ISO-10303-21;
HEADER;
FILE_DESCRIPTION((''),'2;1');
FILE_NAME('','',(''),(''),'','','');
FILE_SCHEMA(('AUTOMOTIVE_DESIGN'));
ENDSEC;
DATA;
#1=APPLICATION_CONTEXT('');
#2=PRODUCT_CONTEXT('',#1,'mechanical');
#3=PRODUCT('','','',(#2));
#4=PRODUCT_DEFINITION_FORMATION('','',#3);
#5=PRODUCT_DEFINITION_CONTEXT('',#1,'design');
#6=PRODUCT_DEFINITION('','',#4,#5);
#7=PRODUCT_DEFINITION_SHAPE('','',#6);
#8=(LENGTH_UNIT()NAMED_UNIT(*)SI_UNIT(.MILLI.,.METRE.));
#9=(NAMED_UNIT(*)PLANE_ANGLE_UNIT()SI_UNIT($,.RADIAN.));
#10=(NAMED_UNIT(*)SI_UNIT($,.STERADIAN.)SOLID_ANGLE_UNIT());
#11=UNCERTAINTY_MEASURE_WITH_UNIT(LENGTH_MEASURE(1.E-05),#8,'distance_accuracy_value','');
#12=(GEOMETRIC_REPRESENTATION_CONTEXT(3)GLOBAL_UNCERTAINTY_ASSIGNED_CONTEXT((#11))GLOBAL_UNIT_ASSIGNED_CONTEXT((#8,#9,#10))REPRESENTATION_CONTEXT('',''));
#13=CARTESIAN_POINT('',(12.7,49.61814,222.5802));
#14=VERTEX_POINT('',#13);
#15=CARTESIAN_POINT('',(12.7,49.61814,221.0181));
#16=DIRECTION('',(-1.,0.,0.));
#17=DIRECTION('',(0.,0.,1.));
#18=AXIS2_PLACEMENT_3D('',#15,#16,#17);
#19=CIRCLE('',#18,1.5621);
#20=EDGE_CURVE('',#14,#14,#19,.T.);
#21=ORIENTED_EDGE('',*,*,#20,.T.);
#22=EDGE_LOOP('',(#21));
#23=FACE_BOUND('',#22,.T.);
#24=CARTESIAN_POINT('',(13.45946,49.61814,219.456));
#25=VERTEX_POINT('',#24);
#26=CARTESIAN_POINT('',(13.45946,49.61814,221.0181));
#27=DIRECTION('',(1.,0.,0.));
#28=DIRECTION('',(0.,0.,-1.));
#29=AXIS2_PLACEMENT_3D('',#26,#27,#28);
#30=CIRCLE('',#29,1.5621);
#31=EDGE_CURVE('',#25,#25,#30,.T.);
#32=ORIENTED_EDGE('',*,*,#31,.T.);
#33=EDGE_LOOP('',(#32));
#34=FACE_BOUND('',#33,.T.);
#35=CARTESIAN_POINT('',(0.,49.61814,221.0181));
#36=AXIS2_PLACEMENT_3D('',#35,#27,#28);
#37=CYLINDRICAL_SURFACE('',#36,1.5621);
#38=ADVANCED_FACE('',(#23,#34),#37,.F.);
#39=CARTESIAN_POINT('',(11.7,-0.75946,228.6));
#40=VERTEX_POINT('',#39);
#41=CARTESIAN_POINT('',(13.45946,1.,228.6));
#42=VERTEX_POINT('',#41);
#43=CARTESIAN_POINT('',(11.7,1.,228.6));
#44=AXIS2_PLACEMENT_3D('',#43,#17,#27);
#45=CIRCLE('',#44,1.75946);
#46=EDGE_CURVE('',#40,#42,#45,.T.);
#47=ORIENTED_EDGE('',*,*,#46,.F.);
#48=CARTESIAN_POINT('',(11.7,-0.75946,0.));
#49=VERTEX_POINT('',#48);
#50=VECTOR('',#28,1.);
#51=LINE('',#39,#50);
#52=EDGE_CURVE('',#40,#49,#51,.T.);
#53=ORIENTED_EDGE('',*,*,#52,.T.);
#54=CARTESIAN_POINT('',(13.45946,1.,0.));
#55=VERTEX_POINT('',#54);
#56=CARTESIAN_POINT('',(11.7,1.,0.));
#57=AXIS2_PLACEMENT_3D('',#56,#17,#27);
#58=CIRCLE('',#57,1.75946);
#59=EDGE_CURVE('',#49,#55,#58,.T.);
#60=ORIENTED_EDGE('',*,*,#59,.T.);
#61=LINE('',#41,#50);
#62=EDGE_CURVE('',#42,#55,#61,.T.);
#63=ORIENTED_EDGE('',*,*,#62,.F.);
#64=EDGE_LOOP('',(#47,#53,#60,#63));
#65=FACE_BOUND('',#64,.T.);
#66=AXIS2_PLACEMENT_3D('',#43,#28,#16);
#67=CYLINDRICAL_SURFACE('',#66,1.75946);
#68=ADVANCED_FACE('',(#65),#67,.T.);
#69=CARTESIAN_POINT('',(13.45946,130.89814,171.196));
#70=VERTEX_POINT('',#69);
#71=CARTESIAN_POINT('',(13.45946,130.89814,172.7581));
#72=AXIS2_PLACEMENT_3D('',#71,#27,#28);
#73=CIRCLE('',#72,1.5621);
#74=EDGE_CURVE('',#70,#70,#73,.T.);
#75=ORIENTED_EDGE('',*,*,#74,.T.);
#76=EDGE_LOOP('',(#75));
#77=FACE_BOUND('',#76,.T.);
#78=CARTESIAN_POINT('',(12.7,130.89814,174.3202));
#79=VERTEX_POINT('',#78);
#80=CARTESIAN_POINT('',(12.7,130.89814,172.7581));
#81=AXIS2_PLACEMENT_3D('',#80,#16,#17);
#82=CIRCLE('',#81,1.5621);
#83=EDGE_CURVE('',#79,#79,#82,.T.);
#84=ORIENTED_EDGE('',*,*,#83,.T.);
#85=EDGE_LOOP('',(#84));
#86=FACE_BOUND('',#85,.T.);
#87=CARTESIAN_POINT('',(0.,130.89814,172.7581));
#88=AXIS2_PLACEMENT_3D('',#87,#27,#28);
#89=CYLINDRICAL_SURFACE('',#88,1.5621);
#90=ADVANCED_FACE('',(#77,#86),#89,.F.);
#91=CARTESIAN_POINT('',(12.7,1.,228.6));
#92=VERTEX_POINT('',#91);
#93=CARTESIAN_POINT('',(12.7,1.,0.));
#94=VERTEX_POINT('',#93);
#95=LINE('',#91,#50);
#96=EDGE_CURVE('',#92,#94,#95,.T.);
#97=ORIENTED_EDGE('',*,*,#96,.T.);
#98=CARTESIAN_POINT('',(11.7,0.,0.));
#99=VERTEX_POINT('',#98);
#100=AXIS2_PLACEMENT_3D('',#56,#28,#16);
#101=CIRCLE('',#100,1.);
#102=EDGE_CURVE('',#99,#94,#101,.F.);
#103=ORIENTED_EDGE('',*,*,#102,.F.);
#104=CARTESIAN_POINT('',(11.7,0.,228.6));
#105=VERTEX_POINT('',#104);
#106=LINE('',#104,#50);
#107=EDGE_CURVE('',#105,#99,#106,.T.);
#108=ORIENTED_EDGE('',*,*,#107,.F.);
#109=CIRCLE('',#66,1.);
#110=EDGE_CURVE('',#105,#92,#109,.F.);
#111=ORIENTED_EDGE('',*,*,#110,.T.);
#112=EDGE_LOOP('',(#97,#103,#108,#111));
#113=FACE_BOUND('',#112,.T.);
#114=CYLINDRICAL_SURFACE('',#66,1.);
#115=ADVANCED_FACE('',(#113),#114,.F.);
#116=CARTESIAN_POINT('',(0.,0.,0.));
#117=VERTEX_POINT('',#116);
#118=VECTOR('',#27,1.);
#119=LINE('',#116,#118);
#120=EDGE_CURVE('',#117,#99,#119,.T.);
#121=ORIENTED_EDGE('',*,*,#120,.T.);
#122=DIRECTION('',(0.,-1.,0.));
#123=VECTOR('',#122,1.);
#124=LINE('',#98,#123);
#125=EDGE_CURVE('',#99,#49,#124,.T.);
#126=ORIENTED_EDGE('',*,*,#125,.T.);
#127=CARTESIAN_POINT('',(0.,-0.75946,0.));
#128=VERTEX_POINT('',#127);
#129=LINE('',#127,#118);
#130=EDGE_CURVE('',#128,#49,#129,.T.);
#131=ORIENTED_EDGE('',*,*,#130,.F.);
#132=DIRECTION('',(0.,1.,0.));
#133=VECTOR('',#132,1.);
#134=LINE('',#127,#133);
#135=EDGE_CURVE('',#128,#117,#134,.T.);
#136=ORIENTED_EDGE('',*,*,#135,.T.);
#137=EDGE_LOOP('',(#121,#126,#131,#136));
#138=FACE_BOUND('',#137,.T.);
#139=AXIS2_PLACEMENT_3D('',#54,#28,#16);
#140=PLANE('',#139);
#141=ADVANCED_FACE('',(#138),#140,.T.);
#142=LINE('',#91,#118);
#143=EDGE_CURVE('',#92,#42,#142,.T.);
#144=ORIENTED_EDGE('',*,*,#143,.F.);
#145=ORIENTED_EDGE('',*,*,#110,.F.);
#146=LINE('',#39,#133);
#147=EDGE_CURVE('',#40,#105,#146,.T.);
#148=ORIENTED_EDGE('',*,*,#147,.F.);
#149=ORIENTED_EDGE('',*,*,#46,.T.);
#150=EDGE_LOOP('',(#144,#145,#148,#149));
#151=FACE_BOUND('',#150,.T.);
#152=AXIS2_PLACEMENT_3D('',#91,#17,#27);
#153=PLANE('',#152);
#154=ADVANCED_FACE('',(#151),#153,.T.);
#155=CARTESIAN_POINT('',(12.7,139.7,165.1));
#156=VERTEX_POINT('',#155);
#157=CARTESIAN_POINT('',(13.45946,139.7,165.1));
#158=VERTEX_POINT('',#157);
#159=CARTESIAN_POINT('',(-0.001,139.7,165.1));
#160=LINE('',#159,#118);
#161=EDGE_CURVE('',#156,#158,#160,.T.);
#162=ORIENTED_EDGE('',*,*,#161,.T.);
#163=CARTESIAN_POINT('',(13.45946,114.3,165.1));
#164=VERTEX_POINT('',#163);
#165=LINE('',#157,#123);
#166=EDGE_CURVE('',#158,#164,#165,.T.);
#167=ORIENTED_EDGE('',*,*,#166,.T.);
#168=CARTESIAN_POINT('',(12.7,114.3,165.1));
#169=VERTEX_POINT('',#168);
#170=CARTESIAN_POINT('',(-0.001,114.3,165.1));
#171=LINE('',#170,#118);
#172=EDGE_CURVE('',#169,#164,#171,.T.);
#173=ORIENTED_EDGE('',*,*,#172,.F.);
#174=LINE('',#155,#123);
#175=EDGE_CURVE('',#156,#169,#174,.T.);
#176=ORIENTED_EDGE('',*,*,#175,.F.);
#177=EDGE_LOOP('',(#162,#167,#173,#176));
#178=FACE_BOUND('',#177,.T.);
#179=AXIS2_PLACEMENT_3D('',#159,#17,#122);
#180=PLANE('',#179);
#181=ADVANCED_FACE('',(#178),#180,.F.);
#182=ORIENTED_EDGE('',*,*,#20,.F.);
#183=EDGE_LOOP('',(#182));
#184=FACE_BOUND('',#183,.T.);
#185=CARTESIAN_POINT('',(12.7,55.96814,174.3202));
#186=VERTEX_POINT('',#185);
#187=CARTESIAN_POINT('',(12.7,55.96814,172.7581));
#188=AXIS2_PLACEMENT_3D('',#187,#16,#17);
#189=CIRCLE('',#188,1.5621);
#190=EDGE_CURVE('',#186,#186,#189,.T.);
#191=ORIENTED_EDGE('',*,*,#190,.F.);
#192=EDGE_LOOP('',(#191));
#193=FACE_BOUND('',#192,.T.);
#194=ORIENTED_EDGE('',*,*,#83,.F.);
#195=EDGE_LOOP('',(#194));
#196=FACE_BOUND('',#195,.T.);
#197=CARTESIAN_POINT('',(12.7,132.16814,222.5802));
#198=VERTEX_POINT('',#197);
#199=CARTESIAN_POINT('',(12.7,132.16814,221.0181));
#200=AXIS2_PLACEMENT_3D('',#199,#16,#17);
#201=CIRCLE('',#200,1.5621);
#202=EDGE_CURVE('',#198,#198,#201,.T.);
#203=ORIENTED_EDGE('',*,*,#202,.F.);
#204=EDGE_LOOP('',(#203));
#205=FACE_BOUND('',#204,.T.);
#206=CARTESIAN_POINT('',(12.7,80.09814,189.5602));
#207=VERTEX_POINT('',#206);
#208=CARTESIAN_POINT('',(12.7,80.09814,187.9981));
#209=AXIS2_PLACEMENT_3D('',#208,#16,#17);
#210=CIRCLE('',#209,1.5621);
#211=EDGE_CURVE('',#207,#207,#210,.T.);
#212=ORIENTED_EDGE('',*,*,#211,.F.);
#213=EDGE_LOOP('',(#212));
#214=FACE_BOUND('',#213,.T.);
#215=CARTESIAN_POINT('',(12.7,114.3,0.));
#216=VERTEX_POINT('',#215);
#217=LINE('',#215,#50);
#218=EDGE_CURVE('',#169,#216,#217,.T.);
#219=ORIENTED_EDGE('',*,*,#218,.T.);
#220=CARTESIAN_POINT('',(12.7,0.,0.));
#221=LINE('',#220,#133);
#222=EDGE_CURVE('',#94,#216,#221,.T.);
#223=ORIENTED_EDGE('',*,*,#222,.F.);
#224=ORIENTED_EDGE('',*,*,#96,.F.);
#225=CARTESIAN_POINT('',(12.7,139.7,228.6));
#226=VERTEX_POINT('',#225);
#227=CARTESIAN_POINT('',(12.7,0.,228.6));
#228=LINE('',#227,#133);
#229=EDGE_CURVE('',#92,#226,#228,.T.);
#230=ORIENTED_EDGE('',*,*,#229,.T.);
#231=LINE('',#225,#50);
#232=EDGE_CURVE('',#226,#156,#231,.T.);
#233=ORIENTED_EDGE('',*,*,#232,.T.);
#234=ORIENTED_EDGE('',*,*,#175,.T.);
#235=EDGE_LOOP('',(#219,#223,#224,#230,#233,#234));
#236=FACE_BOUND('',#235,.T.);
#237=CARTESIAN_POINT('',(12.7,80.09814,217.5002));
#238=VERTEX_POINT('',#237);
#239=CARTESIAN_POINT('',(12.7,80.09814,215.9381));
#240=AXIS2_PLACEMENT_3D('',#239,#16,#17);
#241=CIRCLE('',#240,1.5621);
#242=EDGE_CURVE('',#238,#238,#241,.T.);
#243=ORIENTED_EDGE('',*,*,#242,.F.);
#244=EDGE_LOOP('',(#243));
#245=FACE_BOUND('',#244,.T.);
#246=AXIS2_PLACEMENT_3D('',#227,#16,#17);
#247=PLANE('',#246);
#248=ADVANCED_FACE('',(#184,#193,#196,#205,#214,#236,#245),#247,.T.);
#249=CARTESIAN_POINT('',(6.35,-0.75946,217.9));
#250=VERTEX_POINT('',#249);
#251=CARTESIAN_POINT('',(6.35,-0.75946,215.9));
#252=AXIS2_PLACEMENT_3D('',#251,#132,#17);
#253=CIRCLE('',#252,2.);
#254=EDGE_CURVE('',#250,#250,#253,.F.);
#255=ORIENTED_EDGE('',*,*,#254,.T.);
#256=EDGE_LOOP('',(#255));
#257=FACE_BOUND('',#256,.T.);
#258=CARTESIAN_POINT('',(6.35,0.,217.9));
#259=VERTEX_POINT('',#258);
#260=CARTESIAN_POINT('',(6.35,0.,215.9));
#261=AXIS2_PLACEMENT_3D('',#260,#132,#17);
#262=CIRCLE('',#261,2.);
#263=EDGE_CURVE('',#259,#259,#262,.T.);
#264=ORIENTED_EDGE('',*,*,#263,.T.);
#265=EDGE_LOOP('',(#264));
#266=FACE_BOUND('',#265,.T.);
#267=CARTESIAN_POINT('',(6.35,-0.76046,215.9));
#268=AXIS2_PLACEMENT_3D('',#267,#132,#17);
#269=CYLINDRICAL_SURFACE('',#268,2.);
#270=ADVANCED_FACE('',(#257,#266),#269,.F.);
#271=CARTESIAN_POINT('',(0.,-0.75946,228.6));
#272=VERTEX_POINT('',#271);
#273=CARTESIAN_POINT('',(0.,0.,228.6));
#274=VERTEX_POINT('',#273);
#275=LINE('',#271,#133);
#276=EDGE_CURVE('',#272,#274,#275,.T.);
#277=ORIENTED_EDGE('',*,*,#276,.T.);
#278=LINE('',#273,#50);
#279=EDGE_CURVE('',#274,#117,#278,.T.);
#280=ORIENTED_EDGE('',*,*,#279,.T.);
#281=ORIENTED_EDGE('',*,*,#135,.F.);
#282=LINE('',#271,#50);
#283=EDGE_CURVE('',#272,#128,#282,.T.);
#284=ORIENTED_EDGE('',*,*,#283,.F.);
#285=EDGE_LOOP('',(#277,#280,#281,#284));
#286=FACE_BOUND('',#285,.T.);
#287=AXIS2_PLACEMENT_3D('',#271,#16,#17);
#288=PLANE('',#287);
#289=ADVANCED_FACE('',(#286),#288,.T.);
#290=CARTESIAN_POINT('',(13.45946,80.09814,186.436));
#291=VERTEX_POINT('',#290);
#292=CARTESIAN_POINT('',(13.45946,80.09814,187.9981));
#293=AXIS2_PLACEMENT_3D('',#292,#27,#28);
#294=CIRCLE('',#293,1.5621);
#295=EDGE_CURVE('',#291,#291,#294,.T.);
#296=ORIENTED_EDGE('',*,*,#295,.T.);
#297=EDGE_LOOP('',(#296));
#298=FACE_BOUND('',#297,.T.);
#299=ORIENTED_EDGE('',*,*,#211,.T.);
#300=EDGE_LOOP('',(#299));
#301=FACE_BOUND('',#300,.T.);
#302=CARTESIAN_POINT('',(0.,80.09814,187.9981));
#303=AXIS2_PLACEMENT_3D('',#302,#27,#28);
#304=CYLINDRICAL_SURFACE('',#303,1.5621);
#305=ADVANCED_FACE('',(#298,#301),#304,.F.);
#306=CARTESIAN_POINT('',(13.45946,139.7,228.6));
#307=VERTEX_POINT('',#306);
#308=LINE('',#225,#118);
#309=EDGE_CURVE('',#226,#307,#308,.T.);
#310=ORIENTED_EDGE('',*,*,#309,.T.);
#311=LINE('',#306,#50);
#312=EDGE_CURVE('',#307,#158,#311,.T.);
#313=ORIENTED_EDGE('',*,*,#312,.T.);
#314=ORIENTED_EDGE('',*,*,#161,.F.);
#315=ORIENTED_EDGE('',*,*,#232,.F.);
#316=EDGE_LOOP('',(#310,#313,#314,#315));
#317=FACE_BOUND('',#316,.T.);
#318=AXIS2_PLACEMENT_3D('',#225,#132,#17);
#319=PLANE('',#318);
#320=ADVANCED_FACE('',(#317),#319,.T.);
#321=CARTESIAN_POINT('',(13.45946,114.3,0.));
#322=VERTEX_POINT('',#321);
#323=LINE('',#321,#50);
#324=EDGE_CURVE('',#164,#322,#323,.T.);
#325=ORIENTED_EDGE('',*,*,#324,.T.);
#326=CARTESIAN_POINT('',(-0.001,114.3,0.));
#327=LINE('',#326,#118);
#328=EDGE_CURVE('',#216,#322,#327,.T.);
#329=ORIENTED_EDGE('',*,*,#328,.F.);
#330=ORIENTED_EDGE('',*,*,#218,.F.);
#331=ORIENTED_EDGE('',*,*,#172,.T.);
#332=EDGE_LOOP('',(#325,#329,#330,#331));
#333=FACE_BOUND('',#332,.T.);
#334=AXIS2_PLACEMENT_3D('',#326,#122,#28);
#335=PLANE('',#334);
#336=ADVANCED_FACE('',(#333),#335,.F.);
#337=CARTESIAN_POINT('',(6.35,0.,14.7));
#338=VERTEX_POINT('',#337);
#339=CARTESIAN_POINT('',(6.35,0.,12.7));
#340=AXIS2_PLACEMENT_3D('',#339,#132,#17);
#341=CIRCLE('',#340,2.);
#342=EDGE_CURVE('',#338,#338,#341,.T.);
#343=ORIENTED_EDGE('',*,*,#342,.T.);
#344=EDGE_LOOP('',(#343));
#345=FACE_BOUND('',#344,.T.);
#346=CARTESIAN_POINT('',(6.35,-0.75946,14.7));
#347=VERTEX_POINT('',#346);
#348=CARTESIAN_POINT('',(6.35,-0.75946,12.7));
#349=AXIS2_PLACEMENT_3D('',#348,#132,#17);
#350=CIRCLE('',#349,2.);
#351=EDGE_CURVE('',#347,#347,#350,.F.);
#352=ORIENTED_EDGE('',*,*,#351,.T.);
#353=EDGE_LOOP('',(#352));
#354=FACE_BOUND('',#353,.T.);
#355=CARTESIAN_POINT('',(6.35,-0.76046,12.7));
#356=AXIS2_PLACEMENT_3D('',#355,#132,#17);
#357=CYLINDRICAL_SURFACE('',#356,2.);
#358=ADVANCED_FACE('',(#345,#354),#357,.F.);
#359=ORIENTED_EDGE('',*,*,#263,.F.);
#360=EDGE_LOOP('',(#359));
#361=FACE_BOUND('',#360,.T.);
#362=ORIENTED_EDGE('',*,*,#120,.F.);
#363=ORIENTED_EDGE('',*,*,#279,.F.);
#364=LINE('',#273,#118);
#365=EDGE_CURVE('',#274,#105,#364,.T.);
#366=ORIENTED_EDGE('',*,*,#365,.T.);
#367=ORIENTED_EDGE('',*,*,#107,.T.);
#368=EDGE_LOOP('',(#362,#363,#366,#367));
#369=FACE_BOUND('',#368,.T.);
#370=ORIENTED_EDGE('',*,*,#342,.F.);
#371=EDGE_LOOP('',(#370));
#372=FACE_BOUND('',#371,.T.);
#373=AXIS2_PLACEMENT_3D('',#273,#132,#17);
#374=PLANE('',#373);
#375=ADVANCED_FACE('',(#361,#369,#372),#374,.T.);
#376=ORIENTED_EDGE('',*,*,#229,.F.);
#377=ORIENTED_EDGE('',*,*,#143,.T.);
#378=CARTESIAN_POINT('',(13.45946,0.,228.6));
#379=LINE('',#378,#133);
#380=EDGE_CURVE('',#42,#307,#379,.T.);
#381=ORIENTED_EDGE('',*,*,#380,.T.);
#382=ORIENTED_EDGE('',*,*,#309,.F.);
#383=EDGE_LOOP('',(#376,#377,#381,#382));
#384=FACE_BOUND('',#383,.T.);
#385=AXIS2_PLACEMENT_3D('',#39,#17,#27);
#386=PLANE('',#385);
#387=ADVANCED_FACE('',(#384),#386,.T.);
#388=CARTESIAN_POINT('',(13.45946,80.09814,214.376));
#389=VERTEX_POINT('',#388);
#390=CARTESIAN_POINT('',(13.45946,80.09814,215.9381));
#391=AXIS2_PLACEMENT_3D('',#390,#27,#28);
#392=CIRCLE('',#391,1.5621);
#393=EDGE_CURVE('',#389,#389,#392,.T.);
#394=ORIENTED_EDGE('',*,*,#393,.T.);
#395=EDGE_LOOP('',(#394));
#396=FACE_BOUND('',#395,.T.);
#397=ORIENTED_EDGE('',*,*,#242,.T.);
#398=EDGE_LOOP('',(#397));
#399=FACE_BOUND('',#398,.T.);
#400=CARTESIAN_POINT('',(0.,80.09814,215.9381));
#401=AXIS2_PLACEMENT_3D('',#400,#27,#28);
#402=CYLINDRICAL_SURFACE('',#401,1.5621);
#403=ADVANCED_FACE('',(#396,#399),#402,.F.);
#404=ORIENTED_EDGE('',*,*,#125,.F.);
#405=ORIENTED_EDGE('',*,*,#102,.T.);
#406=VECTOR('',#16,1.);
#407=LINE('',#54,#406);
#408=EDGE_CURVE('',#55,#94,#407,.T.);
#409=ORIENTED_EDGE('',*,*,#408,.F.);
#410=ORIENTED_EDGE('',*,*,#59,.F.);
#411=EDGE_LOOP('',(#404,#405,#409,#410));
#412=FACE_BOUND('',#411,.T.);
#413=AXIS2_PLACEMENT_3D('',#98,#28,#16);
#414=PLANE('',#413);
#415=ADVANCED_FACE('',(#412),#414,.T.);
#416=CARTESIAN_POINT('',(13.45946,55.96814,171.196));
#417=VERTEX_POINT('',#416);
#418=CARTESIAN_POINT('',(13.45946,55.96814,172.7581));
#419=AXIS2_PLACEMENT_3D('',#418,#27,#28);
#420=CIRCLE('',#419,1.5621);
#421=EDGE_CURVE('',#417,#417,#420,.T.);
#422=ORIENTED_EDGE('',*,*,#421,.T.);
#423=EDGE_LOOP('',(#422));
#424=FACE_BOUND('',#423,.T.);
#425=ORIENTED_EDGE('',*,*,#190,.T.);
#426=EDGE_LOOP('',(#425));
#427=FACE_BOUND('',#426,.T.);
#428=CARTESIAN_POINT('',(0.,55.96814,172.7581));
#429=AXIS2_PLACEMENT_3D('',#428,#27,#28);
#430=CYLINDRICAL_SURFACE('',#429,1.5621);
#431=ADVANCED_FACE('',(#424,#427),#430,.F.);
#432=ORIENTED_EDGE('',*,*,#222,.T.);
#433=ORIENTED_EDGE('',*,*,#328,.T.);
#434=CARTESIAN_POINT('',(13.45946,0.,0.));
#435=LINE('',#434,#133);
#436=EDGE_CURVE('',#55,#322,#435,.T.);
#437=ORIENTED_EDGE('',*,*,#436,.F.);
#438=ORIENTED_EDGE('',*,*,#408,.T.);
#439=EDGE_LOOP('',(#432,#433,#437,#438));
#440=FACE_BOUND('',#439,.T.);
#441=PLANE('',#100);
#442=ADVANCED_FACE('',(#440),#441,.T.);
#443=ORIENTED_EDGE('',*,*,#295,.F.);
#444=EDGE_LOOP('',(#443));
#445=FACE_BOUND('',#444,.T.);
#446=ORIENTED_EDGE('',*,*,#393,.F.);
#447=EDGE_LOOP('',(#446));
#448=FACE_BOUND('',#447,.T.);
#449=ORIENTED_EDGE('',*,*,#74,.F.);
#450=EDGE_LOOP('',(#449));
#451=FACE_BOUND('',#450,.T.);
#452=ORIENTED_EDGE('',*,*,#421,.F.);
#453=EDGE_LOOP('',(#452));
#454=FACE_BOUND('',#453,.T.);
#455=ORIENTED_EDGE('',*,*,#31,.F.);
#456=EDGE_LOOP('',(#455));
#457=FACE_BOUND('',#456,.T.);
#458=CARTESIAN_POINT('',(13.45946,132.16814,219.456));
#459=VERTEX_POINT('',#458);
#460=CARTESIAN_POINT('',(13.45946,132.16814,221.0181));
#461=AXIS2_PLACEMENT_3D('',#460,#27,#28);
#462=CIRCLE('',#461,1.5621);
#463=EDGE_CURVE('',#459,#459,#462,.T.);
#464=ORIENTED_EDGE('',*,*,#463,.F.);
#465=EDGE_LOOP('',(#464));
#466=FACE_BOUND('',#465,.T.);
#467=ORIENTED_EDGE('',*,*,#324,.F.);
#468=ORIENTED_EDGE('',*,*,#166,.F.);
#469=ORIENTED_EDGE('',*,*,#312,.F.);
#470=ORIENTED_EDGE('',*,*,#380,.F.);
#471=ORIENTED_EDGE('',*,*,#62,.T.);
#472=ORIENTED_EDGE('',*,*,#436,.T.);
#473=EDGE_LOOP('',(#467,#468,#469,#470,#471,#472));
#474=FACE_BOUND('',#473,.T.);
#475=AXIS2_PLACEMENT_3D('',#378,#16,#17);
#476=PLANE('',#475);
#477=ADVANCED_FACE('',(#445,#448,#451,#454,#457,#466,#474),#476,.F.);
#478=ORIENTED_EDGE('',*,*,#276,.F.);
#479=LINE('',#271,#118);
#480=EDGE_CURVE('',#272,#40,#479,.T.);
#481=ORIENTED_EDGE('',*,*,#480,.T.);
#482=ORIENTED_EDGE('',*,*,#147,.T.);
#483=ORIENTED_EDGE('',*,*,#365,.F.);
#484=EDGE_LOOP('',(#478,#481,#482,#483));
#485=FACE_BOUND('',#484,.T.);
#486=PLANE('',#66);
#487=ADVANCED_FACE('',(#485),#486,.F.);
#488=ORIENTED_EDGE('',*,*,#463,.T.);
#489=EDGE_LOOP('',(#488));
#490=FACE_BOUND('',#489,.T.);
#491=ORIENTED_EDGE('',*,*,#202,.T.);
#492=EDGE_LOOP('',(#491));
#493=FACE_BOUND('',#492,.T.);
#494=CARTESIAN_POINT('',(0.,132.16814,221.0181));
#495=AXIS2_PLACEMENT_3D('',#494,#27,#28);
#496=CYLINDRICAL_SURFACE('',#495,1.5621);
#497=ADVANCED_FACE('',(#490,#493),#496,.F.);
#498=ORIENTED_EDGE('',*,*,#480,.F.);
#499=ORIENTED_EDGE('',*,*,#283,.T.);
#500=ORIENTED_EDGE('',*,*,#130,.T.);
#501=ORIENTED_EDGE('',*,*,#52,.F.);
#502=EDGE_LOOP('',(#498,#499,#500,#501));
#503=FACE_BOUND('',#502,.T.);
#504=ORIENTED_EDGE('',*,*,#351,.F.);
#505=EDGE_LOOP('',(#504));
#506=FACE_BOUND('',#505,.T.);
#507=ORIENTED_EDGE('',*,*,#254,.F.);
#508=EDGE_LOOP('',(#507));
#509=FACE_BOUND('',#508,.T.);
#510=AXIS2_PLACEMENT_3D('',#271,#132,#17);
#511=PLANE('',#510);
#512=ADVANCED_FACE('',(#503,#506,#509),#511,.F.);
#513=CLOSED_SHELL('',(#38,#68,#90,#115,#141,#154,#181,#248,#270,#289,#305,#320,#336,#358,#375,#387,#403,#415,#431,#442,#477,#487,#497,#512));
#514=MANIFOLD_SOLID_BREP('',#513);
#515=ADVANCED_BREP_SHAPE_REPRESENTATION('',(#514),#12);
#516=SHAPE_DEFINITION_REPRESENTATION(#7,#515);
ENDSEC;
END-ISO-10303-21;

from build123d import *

# Parameters (mm, degrees)
BASE_FLANGE1_DEPTH = 228.6
CUT_EXTRUDE1_REACH = 270.245
SKETCH4_W          = 165.1
SKETCH4_H          = 25.4
CUT_EXTRUDE2_REACH = 270.245
SKETCH6_R          = 2
SKETCH7_R          = 1.5621
CUT_EXTRUDE3_DEPTH = 269.244677605


# Sheet-metal steps are written as plain solids
with BuildPart() as part:
    # Sketch1 → Base-Flange1 (new body)
    with BuildSketch(Plane.XY):
        with BuildLine():
            Line((0, 0), (11.7, 0))
            ThreePointArc((11.7, 0), (12.407106781, 0.292893219), (12.7, 1))
            Line((12.7, 1), (12.7, 139.7))
            Line((12.7, 139.7), (13.45946, 139.7))
            Line((13.45946, 139.7), (13.45946, 1))
            ThreePointArc((13.45946, 1), (12.944126097, -0.244126097), (11.7, -0.75946))
            Line((11.7, -0.75946), (0, -0.75946))
            Line((0, -0.75946), (0, 0))
        make_face()
    extrude(amount=BASE_FLANGE1_DEPTH)

    # Sketch4 → Cut-Extrude1 (cut, up to next)
    with BuildSketch(Plane(origin=(13.45946, 0, 0), x_dir=(0, 0, -1), z_dir=(1, 0, 0)), mode=Mode.PRIVATE) as cut_extrude1_sk1:
        with Locations((-82.55, 127)):
            Rectangle(SKETCH4_W, SKETCH4_H)
    cut_extrude1_tool1 = extrude(cut_extrude1_sk1.sketch, amount=-CUT_EXTRUDE1_REACH, mode=Mode.PRIVATE) & part.part
    add(cut_extrude1_tool1.solids().sort_by_distance((13.45946, 127, 82.55))[0], mode=Mode.SUBTRACT)

    # Sketch6 → Cut-Extrude2 (cut, up to next)
    with BuildSketch(Plane(origin=(0, 0, 0), x_dir=(1, 0, 0), z_dir=(0, 1, 0)), mode=Mode.PRIVATE) as cut_extrude2_sk1:
        with Locations(Location((6.35, -12.7, 0), (0, 0, 270))):
            Circle(SKETCH6_R)
    cut_extrude2_tool1 = extrude(cut_extrude2_sk1.sketch, amount=-CUT_EXTRUDE2_REACH, mode=Mode.PRIVATE) & part.part
    # Sketch6 → Cut-Extrude2 (cut, up to next)
    with BuildSketch(Plane(origin=(0, 0, 0), x_dir=(1, 0, 0), z_dir=(0, 1, 0)), mode=Mode.PRIVATE) as cut_extrude2_sk2:
        with Locations(Location((6.35, -215.9, 0), (0, 0, 270))):
            Circle(SKETCH6_R)
    cut_extrude2_tool2 = extrude(cut_extrude2_sk2.sketch, amount=-CUT_EXTRUDE2_REACH, mode=Mode.PRIVATE) & part.part
    add(cut_extrude2_tool1.solids().sort_by_distance((6.35, 0, 12.7))[0], mode=Mode.SUBTRACT)
    add(cut_extrude2_tool2.solids().sort_by_distance((6.35, 0, 215.9))[0], mode=Mode.SUBTRACT)

    # Sketch7 → Cut-Extrude3 (cut, through all)
    with BuildSketch(Plane(origin=(13.45946, 0, 0), x_dir=(0, 0, -1), z_dir=(1, 0, 0))):
        with Locations((-221.0181, 49.61814)):
            Circle(SKETCH7_R)
        with Locations((-172.7581, 55.96814)):
            Circle(SKETCH7_R)
        with Locations((-215.9381, 80.09814)):
            Circle(SKETCH7_R)
        with Locations((-187.9981, 80.09814)):
            Circle(SKETCH7_R)
        with Locations((-221.0181, 132.16814)):
            Circle(SKETCH7_R)
        with Locations((-172.7581, 130.89814)):
            Circle(SKETCH7_R)
    extrude(amount=-CUT_EXTRUDE3_DEPTH, mode=Mode.SUBTRACT)


solid = part.part
